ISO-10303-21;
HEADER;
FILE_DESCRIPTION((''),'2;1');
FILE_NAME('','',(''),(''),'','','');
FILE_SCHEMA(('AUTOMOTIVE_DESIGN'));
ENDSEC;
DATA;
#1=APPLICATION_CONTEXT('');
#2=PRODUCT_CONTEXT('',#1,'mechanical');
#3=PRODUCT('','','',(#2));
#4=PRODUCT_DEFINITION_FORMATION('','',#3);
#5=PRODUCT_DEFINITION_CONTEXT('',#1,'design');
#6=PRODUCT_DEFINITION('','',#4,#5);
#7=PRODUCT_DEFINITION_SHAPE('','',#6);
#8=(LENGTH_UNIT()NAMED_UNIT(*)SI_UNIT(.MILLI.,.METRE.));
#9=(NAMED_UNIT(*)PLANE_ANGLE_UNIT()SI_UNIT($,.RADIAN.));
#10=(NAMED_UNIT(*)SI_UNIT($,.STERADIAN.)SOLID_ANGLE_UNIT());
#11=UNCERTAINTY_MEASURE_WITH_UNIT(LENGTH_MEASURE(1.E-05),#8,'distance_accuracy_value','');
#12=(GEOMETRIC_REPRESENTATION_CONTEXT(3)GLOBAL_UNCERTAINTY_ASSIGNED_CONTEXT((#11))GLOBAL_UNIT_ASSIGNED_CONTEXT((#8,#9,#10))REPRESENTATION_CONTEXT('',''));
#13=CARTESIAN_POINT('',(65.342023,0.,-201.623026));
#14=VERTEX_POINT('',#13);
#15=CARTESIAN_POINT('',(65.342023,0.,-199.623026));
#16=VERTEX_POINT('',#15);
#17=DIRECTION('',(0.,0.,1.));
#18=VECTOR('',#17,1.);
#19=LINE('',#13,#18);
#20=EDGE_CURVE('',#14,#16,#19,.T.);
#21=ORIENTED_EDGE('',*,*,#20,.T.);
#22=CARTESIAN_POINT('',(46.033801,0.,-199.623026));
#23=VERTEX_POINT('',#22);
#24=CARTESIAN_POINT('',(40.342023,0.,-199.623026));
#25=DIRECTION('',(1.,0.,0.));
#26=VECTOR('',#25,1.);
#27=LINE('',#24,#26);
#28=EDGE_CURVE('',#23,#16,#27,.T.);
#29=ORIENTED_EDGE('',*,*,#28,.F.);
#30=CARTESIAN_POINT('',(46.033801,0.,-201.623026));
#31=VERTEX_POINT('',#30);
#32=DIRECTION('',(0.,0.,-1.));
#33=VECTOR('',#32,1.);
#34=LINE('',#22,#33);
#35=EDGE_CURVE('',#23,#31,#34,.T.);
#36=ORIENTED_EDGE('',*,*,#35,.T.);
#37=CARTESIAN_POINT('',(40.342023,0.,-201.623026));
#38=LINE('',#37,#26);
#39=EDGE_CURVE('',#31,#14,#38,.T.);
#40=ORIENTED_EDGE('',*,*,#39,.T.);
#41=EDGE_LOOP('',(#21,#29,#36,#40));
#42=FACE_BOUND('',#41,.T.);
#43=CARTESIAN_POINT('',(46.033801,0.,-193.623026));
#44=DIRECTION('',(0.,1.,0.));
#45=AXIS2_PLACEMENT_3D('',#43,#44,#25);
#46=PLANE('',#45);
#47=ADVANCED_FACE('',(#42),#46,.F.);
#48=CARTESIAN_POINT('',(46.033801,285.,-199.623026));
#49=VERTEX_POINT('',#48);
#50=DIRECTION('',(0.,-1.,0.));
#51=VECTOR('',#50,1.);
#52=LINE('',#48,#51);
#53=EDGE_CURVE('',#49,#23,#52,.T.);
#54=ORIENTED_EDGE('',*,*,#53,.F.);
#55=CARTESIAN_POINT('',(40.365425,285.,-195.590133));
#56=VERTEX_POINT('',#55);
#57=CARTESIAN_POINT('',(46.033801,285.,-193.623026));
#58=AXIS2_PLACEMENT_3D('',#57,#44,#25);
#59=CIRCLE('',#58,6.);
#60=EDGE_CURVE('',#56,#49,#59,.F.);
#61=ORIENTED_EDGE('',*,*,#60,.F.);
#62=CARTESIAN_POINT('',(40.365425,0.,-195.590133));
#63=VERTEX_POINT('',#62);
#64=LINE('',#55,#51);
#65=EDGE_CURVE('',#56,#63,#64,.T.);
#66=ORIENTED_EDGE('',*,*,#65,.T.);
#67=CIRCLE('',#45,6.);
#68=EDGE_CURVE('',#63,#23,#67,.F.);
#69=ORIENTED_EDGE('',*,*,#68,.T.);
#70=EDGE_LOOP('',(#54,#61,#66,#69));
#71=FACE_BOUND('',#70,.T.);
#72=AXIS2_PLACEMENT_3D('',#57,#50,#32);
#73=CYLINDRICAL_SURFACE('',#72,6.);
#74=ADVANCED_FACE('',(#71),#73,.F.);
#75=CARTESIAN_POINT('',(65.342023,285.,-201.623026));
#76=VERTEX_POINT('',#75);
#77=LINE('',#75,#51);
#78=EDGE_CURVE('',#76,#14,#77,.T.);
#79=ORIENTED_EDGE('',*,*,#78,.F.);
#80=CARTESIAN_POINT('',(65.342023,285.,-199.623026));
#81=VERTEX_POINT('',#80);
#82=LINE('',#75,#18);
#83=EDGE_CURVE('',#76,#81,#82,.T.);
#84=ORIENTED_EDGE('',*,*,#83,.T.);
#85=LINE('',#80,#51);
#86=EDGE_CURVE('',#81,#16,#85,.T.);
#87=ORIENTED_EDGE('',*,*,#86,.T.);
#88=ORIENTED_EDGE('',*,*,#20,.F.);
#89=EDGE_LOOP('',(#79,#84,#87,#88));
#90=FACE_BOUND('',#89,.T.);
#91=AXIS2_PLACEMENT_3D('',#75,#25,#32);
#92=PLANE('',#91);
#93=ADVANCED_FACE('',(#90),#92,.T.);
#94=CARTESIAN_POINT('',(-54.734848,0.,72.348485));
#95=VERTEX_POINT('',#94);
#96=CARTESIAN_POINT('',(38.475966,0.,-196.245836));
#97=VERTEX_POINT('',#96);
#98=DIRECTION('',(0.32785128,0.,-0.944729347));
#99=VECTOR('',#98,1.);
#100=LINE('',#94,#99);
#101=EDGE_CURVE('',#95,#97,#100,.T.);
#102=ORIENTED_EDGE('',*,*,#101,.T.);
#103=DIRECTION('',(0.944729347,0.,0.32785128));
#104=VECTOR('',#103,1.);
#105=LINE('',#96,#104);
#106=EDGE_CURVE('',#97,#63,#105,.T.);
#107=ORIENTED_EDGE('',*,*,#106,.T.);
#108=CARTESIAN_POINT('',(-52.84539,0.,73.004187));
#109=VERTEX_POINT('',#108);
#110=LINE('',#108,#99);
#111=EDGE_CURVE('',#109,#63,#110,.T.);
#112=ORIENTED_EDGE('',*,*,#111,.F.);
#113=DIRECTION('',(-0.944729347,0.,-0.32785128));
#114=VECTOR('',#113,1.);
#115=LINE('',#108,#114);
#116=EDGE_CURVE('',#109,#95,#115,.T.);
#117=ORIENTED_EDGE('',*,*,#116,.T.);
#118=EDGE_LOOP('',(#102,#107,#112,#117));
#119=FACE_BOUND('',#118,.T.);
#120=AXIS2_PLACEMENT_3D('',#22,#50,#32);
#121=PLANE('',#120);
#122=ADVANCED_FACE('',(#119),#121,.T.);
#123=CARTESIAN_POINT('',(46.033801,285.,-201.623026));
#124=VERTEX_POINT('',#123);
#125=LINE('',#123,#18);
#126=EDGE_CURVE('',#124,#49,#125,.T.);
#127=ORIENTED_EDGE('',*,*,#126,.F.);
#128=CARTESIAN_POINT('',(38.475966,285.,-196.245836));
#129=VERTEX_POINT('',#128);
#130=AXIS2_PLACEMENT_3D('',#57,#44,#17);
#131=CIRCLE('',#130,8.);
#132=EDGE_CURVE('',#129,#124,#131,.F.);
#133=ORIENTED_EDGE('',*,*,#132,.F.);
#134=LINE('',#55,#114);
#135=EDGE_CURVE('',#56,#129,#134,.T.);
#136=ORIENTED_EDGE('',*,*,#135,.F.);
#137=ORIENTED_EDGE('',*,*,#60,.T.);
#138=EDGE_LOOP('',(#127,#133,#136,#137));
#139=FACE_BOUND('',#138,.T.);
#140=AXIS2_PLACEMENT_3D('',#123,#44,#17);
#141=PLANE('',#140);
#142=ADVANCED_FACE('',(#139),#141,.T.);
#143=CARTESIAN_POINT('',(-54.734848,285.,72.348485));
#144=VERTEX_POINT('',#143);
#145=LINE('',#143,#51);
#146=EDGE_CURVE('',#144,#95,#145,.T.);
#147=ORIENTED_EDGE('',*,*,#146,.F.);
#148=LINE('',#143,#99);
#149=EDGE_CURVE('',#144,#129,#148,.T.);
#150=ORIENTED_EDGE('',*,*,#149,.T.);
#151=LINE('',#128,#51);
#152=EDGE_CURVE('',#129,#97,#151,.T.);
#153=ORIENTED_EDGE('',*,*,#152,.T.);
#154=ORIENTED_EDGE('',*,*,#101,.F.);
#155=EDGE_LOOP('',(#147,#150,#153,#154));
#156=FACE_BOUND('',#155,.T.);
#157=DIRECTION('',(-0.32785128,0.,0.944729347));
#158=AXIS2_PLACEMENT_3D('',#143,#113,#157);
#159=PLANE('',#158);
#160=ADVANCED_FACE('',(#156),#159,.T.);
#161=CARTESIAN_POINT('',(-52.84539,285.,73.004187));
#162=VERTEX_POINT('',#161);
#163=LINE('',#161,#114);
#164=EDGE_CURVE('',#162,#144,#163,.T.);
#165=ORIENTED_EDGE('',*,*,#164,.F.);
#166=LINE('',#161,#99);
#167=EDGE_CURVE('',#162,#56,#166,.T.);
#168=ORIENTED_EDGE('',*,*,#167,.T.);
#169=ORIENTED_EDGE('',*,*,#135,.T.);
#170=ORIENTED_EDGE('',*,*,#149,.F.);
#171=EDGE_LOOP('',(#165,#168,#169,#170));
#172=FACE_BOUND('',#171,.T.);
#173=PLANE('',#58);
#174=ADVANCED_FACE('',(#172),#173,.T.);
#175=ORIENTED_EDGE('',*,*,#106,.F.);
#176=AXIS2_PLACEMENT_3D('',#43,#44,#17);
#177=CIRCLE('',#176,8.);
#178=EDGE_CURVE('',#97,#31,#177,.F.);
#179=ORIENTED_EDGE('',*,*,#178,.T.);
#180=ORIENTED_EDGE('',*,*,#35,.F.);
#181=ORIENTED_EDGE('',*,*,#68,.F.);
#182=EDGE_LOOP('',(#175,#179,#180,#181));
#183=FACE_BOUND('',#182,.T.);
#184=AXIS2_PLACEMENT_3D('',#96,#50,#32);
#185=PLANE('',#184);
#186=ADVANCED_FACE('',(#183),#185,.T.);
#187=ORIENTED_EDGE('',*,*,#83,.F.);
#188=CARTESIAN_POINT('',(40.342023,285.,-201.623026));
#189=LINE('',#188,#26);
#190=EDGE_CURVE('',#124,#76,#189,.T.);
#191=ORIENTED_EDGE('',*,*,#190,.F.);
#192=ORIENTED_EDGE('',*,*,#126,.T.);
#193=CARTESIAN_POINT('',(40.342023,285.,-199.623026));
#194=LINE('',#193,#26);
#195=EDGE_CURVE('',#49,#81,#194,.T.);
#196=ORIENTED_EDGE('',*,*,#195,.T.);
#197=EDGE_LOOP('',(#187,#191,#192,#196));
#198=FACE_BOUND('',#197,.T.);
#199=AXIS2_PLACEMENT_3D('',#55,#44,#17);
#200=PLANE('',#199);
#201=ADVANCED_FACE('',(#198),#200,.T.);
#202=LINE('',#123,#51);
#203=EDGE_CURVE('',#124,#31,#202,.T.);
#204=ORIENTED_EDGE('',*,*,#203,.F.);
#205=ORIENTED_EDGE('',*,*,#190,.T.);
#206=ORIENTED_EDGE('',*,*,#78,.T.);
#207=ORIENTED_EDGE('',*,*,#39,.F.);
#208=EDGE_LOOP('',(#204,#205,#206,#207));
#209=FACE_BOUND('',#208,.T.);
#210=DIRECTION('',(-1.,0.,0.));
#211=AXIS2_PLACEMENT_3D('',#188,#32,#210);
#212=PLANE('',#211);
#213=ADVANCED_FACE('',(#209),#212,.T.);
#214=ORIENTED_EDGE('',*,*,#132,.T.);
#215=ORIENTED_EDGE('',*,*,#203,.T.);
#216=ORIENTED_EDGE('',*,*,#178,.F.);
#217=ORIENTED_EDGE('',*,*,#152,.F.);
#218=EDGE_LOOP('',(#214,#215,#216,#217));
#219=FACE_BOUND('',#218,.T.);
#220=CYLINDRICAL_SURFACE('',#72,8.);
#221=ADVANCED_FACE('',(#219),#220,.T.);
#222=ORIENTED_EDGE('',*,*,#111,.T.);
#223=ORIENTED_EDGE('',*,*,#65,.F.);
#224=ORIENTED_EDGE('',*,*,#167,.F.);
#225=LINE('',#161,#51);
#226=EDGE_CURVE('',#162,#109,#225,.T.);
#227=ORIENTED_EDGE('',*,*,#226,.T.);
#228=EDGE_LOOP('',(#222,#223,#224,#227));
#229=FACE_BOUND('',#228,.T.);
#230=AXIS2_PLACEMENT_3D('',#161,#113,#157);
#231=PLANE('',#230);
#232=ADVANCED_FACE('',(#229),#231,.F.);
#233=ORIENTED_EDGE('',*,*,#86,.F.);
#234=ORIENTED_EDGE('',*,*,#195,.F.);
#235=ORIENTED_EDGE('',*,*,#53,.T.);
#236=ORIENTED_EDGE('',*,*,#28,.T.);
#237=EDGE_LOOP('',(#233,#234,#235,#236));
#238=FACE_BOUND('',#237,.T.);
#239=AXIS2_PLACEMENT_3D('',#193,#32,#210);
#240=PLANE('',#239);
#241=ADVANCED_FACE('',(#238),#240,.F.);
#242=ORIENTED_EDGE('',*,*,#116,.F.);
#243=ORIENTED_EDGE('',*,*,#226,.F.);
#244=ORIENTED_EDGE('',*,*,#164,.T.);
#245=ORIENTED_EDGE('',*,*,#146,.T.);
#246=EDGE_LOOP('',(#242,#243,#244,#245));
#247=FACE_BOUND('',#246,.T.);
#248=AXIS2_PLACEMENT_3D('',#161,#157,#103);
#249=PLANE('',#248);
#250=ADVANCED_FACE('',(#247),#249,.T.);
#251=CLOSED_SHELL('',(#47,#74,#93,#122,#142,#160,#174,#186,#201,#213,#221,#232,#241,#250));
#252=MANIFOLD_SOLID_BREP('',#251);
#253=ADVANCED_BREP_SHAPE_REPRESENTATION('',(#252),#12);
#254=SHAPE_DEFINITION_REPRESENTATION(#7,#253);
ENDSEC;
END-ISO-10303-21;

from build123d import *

# Parameters (mm, degrees)
BASE_FLANGE1_DEPTH = 285


# Sheet-metal steps are written as plain solids
with BuildPart() as part:
    # Sketch1 → Base-Flange1 (new body)
    with BuildSketch(Plane(origin=(0, 0, 0), x_dir=(1, 0, 0), z_dir=(0, 1, 0))):
        with BuildLine():
            Line((-54.734848485, -72.348484848), (38.475966015, 196.24583588))
            ThreePointArc((38.475966015, 196.24583588), (41.396047124, 200.141556223), (46.033800787, 201.62302564))
            Line((46.033800787, 201.62302564), (65.342022735, 201.62302564))
            Line((65.342022735, 201.62302564), (65.342022735, 199.62302564))
            Line((65.342022735, 199.62302564), (46.033800787, 199.62302564))
            ThreePointArc((46.033800787, 199.62302564), (42.555485539, 198.511923577), (40.365424708, 195.59013332))
            Line((40.365424708, 195.59013332), (-52.845389792, -73.004187409))
            Line((-52.845389792, -73.004187409), (-54.734848485, -72.348484848))
        make_face()
    extrude(amount=BASE_FLANGE1_DEPTH)


solid = part.part
